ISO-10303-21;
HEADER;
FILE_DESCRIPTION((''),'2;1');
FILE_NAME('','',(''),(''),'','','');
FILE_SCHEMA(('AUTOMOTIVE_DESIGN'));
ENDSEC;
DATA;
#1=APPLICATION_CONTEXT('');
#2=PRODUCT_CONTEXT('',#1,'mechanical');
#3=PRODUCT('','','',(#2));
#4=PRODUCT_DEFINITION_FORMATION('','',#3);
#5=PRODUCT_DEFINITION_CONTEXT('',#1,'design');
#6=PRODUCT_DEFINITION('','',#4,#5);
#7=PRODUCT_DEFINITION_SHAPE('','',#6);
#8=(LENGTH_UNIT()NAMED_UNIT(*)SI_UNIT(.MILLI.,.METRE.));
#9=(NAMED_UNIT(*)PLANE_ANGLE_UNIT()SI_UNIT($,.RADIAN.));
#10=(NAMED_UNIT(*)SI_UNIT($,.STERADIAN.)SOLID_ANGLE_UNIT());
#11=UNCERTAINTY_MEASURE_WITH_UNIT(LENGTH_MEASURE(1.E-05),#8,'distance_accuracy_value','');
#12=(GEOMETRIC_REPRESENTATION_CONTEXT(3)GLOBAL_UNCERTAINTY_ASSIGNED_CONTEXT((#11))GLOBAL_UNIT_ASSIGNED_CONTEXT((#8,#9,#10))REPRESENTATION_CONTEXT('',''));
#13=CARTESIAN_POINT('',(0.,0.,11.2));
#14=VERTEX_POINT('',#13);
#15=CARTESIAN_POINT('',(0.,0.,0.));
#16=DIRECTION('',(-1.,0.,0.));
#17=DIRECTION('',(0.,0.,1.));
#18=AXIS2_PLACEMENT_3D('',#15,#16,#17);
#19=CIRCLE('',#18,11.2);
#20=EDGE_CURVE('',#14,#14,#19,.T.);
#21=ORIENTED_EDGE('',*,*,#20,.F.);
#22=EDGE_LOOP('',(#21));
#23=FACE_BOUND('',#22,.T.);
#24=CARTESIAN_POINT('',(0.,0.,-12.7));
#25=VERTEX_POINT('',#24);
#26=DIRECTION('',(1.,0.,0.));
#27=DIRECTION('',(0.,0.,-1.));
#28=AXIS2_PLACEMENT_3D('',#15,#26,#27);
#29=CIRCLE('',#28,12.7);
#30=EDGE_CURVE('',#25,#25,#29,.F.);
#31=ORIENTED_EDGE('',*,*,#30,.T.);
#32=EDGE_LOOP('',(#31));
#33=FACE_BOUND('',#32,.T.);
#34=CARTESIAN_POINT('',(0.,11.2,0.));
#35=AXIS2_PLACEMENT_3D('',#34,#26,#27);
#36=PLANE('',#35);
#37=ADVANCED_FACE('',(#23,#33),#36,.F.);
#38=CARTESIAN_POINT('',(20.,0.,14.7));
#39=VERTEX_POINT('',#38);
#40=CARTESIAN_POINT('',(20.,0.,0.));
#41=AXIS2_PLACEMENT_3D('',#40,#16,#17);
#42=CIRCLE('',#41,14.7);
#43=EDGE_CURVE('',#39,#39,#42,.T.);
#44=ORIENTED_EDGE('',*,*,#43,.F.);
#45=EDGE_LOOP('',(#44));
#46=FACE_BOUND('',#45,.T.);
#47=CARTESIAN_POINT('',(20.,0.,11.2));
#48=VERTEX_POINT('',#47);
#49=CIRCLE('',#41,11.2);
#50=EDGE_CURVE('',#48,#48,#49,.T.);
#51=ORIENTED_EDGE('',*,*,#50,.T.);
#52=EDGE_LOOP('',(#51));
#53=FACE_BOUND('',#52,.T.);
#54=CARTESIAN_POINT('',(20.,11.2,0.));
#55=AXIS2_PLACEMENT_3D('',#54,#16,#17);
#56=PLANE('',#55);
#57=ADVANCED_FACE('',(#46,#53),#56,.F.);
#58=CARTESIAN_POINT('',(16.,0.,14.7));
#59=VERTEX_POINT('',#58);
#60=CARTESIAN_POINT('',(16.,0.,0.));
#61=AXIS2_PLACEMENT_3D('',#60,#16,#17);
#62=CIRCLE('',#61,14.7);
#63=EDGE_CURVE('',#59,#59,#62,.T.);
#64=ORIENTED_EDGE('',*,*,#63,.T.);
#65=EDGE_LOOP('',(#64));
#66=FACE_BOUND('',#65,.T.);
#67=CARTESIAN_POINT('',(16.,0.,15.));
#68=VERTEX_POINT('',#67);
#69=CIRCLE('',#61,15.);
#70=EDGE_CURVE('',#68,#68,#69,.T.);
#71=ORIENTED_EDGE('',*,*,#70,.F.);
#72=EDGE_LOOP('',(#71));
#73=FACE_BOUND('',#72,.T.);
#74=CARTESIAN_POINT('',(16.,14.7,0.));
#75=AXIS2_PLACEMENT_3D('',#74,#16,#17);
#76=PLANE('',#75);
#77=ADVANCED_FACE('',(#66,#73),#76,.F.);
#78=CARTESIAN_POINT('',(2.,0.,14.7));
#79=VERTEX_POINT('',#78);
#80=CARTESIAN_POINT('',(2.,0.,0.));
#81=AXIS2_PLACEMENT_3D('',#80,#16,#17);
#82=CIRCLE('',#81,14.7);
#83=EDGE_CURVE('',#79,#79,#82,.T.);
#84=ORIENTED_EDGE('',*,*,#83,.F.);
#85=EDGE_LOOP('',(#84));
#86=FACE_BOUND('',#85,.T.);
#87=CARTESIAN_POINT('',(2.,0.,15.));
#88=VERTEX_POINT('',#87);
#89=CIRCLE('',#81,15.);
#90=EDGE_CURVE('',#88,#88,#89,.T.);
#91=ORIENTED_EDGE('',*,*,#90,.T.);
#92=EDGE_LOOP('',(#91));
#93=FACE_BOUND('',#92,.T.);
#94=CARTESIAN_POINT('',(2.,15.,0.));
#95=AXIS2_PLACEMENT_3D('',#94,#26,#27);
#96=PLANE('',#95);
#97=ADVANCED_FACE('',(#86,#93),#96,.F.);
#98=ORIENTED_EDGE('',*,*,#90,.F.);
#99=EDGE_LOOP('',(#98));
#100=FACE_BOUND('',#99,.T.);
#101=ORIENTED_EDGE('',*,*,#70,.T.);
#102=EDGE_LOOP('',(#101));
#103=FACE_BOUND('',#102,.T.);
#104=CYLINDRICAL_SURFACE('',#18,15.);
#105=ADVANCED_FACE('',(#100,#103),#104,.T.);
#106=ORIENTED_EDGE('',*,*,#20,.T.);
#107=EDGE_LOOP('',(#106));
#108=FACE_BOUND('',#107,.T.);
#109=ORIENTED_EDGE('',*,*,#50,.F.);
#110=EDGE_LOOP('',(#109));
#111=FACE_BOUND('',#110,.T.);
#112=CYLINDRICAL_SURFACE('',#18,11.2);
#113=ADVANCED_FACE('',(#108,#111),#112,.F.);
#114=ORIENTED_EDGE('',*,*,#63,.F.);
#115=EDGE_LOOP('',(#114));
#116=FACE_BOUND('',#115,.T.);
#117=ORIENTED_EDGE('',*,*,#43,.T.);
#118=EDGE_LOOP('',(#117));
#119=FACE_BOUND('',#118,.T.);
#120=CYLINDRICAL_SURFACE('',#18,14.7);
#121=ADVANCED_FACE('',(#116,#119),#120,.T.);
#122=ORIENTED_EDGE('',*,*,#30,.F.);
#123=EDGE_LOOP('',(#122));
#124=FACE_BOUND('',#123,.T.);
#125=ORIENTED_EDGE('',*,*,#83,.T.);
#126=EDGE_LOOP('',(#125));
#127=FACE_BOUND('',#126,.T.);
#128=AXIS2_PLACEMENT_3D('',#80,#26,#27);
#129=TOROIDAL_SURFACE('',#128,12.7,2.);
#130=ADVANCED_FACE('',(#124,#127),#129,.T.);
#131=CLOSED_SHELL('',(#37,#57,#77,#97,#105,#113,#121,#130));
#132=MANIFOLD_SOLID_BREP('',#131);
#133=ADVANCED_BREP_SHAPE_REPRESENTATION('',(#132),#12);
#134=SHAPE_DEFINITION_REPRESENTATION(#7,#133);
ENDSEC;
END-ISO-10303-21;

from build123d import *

# Parameters (mm, degrees)
FILLET_1_R = 2


with BuildPart() as part:
    # Эскиз1 → Повернуть1 (revolve)
    with BuildSketch(Plane.XY, mode=Mode.PRIVATE) as revolve_1_sk:
        Polygon((0, 11.2), (20, 11.2), (20, 14.7), (16, 14.7), (16, 15), (2, 15), (2, 14.7), (0, 14.7), align=None)
    revolve(revolve_1_sk.sketch.rotate(Axis((0, 0, 0), (1, 0, 0)), 90), axis=Axis((0, 0, 0), (1, 0, 0)))

    # Скругление1
    fillet_1_edges = [part.edges().sort_by_distance(p)[0] for p in [
        (0, 0, -14.7),
    ]]
    fillet(fillet_1_edges, radius=FILLET_1_R - 0.0001)  # a hair under: the kernel refuses the full size


solid = part.part
